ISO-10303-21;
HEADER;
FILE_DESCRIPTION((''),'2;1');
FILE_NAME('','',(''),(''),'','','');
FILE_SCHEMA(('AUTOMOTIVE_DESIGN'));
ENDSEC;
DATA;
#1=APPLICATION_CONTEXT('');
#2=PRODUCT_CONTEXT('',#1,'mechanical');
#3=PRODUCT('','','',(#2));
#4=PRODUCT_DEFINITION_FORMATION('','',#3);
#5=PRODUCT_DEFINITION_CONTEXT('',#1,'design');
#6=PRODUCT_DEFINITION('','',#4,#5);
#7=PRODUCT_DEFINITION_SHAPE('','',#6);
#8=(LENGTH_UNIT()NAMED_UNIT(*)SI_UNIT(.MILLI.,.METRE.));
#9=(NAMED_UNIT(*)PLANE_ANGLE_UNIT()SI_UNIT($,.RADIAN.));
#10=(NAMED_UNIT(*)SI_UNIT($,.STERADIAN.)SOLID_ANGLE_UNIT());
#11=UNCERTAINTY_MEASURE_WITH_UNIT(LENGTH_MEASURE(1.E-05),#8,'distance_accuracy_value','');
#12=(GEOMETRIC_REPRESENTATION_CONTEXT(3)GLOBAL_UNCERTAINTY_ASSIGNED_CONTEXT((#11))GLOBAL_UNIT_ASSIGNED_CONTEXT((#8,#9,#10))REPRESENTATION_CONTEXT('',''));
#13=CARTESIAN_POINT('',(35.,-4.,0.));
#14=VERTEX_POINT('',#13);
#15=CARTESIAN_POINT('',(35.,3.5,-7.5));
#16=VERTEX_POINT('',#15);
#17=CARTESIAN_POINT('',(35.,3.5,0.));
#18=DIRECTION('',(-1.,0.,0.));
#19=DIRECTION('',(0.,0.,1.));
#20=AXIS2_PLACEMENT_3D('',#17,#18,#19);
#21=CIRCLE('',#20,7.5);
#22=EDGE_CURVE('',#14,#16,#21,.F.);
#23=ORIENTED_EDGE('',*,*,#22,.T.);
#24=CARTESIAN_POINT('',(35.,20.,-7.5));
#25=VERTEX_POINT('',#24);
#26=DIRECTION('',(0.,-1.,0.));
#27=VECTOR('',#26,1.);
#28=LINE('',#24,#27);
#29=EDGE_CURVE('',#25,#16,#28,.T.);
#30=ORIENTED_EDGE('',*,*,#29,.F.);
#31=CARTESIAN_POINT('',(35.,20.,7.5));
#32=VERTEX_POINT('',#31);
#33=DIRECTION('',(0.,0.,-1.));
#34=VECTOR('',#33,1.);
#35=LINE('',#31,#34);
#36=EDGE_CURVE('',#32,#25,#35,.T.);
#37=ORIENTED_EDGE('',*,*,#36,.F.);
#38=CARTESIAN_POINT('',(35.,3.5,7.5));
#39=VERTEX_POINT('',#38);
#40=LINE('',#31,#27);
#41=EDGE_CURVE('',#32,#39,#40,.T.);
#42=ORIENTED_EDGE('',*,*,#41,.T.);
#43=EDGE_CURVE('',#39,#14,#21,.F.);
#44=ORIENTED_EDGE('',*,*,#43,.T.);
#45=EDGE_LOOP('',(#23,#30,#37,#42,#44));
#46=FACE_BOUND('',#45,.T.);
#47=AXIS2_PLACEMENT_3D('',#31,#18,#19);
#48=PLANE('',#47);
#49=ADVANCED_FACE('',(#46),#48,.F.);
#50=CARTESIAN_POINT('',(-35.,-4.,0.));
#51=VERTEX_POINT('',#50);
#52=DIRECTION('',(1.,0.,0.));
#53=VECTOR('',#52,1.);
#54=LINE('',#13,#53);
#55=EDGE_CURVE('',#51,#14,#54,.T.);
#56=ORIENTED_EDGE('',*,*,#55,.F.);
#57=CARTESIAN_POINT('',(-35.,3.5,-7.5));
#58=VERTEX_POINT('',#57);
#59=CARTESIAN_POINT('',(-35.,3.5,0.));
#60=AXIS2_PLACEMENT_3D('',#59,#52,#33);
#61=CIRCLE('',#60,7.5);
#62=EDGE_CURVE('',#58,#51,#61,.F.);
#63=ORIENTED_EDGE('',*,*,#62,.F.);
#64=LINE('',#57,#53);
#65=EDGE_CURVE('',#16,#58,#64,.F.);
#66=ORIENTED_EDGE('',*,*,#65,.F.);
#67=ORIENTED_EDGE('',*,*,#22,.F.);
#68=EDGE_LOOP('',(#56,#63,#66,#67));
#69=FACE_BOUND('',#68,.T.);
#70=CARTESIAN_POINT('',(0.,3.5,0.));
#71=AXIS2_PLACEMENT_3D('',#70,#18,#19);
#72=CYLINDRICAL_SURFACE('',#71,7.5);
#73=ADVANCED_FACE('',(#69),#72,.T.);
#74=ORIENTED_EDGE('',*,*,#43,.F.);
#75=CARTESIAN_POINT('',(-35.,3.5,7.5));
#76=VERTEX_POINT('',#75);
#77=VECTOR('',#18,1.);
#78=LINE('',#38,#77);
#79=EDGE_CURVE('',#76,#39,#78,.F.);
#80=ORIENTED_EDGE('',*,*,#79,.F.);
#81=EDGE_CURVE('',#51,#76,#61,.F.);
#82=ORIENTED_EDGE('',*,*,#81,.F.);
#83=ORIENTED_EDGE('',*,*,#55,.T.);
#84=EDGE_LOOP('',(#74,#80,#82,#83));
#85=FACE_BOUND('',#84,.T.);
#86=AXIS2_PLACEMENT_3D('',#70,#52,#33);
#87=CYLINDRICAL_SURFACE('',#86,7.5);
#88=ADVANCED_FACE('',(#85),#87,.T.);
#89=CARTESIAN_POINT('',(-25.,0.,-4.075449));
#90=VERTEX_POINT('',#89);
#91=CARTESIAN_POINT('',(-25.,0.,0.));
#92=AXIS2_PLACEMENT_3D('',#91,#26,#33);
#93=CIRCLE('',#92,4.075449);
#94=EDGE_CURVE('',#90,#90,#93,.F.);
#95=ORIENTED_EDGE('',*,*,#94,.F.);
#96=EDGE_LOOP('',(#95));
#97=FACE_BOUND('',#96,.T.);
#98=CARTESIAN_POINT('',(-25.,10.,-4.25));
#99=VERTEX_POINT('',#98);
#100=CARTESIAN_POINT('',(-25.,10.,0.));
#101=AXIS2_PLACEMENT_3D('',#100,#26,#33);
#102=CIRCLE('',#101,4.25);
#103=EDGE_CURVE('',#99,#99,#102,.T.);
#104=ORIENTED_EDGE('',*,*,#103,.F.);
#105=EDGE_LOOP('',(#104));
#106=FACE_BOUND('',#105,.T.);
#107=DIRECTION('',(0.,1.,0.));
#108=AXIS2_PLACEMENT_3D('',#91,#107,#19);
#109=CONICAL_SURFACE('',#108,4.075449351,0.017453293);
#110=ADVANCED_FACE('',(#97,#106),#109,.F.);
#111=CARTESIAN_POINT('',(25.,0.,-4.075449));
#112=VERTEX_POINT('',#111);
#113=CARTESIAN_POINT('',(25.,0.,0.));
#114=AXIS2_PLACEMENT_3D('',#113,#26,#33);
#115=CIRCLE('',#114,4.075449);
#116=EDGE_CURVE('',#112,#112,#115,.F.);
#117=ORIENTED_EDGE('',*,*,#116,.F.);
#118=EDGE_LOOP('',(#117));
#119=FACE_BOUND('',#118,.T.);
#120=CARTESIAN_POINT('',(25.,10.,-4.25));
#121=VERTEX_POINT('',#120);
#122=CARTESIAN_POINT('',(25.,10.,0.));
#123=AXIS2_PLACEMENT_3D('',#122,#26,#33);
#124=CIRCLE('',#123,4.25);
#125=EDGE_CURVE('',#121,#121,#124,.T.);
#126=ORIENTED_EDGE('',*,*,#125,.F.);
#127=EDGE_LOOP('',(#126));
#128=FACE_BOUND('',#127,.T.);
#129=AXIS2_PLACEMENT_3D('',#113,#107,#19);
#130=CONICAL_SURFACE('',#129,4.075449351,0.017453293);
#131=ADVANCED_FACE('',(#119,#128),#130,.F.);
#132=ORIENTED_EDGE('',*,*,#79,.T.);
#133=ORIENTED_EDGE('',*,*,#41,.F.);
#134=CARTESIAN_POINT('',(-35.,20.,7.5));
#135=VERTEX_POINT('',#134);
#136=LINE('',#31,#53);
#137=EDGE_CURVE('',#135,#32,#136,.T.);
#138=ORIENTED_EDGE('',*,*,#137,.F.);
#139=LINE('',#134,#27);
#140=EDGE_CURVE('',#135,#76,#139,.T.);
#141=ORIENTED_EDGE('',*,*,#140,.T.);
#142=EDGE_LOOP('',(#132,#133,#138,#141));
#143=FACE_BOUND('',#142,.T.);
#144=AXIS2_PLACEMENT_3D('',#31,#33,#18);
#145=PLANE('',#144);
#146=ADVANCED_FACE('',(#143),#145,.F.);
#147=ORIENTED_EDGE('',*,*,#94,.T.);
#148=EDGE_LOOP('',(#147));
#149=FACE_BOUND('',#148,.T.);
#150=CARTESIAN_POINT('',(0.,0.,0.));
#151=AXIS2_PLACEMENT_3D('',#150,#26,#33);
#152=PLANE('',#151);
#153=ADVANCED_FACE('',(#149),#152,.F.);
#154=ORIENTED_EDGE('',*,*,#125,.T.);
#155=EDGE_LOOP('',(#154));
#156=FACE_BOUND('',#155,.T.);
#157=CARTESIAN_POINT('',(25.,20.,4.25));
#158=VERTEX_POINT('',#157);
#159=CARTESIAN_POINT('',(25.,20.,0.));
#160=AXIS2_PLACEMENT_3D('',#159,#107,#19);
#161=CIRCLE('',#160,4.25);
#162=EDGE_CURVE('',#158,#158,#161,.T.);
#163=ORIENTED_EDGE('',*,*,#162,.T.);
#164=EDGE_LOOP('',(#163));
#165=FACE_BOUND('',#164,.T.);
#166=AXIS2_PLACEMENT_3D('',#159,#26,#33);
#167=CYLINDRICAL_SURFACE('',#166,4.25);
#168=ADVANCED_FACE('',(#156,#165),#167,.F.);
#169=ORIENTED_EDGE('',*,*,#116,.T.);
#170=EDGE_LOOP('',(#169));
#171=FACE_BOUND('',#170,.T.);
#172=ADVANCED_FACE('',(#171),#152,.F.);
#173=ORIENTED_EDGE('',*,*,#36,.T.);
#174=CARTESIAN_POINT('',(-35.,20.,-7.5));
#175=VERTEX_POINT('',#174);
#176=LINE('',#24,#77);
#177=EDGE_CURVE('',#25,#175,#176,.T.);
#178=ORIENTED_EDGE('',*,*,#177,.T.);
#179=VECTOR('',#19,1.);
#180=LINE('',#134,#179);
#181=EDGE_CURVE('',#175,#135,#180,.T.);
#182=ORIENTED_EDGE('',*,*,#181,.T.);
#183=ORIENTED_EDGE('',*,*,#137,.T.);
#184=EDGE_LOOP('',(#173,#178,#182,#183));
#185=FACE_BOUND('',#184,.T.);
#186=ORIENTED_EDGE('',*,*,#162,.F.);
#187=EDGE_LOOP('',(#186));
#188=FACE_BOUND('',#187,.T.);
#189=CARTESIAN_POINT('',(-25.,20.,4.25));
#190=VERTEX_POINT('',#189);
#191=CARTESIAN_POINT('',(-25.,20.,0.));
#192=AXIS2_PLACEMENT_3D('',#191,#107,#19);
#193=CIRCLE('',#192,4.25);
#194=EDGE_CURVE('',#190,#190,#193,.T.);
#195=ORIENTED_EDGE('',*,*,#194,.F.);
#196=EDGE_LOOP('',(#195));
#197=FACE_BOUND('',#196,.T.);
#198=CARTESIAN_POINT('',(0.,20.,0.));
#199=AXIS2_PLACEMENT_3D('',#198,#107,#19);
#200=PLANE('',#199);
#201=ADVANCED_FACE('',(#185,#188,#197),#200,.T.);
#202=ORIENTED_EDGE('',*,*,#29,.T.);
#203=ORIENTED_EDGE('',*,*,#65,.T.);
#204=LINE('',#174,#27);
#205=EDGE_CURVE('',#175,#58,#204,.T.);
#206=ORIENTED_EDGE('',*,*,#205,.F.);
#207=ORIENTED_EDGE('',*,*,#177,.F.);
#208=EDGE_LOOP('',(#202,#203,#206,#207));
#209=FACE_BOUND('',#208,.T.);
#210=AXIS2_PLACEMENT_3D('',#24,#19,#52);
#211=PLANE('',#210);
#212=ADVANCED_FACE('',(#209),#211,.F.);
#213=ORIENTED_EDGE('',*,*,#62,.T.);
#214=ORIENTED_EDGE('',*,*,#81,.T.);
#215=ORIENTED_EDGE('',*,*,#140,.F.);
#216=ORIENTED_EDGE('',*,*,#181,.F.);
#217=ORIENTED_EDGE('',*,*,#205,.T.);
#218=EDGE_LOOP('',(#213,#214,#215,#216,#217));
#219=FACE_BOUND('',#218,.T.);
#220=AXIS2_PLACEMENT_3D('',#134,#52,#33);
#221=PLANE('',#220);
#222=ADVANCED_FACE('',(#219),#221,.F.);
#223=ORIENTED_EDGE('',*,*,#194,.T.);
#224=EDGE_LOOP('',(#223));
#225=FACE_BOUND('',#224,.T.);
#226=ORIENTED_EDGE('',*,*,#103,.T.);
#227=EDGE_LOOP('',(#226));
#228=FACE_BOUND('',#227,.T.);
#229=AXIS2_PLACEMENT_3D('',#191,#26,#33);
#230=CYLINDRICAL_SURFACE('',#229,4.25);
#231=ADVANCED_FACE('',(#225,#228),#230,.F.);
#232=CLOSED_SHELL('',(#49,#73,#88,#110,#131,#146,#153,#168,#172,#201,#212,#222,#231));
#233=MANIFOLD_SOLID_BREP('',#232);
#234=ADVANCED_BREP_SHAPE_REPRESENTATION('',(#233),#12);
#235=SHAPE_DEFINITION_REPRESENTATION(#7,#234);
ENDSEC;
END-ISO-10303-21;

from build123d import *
from OCP.BRepFilletAPI import BRepFilletAPI_MakeChamfer

# Parameters (mm, degrees)
SKETCH1_W           = 70
SKETCH1_H           = 15
SKETCH1_R           = 4.25
BOSS_EXTRUDE1_DEPTH = 20
SKETCH2_W           = 70
SKETCH2_H           = 15
BOSS_EXTRUDE2_DEPTH = 4
FILLET1_R           = 7.5
CHAMFER1_SIZE       = 10
CHAMFER1_SIZE2      = 0.174550649


with BuildPart() as part:
    # Sketch1 → Boss-Extrude1 (new body)
    with BuildSketch(Plane(origin=(0, 0, 0), x_dir=(1, 0, 0), z_dir=(0, 1, 0))):
        Rectangle(SKETCH1_W, SKETCH1_H)
        with Locations(Location((-25, 0, 0), (0, 0, 270))):
            Circle(SKETCH1_R, mode=Mode.SUBTRACT)
        with Locations(Location((25, 0, 0), (0, 0, 270))):
            Circle(SKETCH1_R, mode=Mode.SUBTRACT)
    extrude(amount=BOSS_EXTRUDE1_DEPTH)

    # Sketch2 → Boss-Extrude2 (add)
    with BuildSketch(Plane.XZ):
        Rectangle(SKETCH2_W, SKETCH2_H)
    extrude(amount=BOSS_EXTRUDE2_DEPTH)

    # Fillet1
    fillet1_edges = [part.edges().sort_by_distance(p)[0] for p in [
        (0, -4, 7.5),
        (0, -4, -7.5),
    ]]
    fillet(fillet1_edges, radius=FILLET1_R - 0.0001)  # a hair under: the kernel refuses the full size

    # Chamfer1: one chamfer whose edges measure the first distance from different faces: ONE call of the kernel's chamfer builder (chamfer() names one face for all edges)
    chamfer1_edges_1 = [part.edges().sort_by_distance(p)[0] for p in [
        (-25, 0, -4.25),
    ]]
    chamfer1_side_1 = [part.faces().sort_by_distance(p)[0] for p in [
        (-25, 10, -4.25),
    ]]
    chamfer1_edges_2 = [part.edges().sort_by_distance(p)[0] for p in [
        (25, 0, -4.25),
    ]]
    chamfer1_side_2 = [part.faces().sort_by_distance(p)[0] for p in [
        (25, 10, -4.25),
    ]]
    chamfer1 = BRepFilletAPI_MakeChamfer(part.part.solid().wrapped)
    for e in chamfer1_edges_1:
        chamfer1.Add(CHAMFER1_SIZE, CHAMFER1_SIZE2, e.wrapped, chamfer1_side_1[0].wrapped)  # the first distance lies on this face
    for e in chamfer1_edges_2:
        chamfer1.Add(CHAMFER1_SIZE, CHAMFER1_SIZE2, e.wrapped, chamfer1_side_2[0].wrapped)  # the first distance lies on this face
    add(Compound.cast(chamfer1.Shape()), mode=Mode.REPLACE)


solid = part.part
